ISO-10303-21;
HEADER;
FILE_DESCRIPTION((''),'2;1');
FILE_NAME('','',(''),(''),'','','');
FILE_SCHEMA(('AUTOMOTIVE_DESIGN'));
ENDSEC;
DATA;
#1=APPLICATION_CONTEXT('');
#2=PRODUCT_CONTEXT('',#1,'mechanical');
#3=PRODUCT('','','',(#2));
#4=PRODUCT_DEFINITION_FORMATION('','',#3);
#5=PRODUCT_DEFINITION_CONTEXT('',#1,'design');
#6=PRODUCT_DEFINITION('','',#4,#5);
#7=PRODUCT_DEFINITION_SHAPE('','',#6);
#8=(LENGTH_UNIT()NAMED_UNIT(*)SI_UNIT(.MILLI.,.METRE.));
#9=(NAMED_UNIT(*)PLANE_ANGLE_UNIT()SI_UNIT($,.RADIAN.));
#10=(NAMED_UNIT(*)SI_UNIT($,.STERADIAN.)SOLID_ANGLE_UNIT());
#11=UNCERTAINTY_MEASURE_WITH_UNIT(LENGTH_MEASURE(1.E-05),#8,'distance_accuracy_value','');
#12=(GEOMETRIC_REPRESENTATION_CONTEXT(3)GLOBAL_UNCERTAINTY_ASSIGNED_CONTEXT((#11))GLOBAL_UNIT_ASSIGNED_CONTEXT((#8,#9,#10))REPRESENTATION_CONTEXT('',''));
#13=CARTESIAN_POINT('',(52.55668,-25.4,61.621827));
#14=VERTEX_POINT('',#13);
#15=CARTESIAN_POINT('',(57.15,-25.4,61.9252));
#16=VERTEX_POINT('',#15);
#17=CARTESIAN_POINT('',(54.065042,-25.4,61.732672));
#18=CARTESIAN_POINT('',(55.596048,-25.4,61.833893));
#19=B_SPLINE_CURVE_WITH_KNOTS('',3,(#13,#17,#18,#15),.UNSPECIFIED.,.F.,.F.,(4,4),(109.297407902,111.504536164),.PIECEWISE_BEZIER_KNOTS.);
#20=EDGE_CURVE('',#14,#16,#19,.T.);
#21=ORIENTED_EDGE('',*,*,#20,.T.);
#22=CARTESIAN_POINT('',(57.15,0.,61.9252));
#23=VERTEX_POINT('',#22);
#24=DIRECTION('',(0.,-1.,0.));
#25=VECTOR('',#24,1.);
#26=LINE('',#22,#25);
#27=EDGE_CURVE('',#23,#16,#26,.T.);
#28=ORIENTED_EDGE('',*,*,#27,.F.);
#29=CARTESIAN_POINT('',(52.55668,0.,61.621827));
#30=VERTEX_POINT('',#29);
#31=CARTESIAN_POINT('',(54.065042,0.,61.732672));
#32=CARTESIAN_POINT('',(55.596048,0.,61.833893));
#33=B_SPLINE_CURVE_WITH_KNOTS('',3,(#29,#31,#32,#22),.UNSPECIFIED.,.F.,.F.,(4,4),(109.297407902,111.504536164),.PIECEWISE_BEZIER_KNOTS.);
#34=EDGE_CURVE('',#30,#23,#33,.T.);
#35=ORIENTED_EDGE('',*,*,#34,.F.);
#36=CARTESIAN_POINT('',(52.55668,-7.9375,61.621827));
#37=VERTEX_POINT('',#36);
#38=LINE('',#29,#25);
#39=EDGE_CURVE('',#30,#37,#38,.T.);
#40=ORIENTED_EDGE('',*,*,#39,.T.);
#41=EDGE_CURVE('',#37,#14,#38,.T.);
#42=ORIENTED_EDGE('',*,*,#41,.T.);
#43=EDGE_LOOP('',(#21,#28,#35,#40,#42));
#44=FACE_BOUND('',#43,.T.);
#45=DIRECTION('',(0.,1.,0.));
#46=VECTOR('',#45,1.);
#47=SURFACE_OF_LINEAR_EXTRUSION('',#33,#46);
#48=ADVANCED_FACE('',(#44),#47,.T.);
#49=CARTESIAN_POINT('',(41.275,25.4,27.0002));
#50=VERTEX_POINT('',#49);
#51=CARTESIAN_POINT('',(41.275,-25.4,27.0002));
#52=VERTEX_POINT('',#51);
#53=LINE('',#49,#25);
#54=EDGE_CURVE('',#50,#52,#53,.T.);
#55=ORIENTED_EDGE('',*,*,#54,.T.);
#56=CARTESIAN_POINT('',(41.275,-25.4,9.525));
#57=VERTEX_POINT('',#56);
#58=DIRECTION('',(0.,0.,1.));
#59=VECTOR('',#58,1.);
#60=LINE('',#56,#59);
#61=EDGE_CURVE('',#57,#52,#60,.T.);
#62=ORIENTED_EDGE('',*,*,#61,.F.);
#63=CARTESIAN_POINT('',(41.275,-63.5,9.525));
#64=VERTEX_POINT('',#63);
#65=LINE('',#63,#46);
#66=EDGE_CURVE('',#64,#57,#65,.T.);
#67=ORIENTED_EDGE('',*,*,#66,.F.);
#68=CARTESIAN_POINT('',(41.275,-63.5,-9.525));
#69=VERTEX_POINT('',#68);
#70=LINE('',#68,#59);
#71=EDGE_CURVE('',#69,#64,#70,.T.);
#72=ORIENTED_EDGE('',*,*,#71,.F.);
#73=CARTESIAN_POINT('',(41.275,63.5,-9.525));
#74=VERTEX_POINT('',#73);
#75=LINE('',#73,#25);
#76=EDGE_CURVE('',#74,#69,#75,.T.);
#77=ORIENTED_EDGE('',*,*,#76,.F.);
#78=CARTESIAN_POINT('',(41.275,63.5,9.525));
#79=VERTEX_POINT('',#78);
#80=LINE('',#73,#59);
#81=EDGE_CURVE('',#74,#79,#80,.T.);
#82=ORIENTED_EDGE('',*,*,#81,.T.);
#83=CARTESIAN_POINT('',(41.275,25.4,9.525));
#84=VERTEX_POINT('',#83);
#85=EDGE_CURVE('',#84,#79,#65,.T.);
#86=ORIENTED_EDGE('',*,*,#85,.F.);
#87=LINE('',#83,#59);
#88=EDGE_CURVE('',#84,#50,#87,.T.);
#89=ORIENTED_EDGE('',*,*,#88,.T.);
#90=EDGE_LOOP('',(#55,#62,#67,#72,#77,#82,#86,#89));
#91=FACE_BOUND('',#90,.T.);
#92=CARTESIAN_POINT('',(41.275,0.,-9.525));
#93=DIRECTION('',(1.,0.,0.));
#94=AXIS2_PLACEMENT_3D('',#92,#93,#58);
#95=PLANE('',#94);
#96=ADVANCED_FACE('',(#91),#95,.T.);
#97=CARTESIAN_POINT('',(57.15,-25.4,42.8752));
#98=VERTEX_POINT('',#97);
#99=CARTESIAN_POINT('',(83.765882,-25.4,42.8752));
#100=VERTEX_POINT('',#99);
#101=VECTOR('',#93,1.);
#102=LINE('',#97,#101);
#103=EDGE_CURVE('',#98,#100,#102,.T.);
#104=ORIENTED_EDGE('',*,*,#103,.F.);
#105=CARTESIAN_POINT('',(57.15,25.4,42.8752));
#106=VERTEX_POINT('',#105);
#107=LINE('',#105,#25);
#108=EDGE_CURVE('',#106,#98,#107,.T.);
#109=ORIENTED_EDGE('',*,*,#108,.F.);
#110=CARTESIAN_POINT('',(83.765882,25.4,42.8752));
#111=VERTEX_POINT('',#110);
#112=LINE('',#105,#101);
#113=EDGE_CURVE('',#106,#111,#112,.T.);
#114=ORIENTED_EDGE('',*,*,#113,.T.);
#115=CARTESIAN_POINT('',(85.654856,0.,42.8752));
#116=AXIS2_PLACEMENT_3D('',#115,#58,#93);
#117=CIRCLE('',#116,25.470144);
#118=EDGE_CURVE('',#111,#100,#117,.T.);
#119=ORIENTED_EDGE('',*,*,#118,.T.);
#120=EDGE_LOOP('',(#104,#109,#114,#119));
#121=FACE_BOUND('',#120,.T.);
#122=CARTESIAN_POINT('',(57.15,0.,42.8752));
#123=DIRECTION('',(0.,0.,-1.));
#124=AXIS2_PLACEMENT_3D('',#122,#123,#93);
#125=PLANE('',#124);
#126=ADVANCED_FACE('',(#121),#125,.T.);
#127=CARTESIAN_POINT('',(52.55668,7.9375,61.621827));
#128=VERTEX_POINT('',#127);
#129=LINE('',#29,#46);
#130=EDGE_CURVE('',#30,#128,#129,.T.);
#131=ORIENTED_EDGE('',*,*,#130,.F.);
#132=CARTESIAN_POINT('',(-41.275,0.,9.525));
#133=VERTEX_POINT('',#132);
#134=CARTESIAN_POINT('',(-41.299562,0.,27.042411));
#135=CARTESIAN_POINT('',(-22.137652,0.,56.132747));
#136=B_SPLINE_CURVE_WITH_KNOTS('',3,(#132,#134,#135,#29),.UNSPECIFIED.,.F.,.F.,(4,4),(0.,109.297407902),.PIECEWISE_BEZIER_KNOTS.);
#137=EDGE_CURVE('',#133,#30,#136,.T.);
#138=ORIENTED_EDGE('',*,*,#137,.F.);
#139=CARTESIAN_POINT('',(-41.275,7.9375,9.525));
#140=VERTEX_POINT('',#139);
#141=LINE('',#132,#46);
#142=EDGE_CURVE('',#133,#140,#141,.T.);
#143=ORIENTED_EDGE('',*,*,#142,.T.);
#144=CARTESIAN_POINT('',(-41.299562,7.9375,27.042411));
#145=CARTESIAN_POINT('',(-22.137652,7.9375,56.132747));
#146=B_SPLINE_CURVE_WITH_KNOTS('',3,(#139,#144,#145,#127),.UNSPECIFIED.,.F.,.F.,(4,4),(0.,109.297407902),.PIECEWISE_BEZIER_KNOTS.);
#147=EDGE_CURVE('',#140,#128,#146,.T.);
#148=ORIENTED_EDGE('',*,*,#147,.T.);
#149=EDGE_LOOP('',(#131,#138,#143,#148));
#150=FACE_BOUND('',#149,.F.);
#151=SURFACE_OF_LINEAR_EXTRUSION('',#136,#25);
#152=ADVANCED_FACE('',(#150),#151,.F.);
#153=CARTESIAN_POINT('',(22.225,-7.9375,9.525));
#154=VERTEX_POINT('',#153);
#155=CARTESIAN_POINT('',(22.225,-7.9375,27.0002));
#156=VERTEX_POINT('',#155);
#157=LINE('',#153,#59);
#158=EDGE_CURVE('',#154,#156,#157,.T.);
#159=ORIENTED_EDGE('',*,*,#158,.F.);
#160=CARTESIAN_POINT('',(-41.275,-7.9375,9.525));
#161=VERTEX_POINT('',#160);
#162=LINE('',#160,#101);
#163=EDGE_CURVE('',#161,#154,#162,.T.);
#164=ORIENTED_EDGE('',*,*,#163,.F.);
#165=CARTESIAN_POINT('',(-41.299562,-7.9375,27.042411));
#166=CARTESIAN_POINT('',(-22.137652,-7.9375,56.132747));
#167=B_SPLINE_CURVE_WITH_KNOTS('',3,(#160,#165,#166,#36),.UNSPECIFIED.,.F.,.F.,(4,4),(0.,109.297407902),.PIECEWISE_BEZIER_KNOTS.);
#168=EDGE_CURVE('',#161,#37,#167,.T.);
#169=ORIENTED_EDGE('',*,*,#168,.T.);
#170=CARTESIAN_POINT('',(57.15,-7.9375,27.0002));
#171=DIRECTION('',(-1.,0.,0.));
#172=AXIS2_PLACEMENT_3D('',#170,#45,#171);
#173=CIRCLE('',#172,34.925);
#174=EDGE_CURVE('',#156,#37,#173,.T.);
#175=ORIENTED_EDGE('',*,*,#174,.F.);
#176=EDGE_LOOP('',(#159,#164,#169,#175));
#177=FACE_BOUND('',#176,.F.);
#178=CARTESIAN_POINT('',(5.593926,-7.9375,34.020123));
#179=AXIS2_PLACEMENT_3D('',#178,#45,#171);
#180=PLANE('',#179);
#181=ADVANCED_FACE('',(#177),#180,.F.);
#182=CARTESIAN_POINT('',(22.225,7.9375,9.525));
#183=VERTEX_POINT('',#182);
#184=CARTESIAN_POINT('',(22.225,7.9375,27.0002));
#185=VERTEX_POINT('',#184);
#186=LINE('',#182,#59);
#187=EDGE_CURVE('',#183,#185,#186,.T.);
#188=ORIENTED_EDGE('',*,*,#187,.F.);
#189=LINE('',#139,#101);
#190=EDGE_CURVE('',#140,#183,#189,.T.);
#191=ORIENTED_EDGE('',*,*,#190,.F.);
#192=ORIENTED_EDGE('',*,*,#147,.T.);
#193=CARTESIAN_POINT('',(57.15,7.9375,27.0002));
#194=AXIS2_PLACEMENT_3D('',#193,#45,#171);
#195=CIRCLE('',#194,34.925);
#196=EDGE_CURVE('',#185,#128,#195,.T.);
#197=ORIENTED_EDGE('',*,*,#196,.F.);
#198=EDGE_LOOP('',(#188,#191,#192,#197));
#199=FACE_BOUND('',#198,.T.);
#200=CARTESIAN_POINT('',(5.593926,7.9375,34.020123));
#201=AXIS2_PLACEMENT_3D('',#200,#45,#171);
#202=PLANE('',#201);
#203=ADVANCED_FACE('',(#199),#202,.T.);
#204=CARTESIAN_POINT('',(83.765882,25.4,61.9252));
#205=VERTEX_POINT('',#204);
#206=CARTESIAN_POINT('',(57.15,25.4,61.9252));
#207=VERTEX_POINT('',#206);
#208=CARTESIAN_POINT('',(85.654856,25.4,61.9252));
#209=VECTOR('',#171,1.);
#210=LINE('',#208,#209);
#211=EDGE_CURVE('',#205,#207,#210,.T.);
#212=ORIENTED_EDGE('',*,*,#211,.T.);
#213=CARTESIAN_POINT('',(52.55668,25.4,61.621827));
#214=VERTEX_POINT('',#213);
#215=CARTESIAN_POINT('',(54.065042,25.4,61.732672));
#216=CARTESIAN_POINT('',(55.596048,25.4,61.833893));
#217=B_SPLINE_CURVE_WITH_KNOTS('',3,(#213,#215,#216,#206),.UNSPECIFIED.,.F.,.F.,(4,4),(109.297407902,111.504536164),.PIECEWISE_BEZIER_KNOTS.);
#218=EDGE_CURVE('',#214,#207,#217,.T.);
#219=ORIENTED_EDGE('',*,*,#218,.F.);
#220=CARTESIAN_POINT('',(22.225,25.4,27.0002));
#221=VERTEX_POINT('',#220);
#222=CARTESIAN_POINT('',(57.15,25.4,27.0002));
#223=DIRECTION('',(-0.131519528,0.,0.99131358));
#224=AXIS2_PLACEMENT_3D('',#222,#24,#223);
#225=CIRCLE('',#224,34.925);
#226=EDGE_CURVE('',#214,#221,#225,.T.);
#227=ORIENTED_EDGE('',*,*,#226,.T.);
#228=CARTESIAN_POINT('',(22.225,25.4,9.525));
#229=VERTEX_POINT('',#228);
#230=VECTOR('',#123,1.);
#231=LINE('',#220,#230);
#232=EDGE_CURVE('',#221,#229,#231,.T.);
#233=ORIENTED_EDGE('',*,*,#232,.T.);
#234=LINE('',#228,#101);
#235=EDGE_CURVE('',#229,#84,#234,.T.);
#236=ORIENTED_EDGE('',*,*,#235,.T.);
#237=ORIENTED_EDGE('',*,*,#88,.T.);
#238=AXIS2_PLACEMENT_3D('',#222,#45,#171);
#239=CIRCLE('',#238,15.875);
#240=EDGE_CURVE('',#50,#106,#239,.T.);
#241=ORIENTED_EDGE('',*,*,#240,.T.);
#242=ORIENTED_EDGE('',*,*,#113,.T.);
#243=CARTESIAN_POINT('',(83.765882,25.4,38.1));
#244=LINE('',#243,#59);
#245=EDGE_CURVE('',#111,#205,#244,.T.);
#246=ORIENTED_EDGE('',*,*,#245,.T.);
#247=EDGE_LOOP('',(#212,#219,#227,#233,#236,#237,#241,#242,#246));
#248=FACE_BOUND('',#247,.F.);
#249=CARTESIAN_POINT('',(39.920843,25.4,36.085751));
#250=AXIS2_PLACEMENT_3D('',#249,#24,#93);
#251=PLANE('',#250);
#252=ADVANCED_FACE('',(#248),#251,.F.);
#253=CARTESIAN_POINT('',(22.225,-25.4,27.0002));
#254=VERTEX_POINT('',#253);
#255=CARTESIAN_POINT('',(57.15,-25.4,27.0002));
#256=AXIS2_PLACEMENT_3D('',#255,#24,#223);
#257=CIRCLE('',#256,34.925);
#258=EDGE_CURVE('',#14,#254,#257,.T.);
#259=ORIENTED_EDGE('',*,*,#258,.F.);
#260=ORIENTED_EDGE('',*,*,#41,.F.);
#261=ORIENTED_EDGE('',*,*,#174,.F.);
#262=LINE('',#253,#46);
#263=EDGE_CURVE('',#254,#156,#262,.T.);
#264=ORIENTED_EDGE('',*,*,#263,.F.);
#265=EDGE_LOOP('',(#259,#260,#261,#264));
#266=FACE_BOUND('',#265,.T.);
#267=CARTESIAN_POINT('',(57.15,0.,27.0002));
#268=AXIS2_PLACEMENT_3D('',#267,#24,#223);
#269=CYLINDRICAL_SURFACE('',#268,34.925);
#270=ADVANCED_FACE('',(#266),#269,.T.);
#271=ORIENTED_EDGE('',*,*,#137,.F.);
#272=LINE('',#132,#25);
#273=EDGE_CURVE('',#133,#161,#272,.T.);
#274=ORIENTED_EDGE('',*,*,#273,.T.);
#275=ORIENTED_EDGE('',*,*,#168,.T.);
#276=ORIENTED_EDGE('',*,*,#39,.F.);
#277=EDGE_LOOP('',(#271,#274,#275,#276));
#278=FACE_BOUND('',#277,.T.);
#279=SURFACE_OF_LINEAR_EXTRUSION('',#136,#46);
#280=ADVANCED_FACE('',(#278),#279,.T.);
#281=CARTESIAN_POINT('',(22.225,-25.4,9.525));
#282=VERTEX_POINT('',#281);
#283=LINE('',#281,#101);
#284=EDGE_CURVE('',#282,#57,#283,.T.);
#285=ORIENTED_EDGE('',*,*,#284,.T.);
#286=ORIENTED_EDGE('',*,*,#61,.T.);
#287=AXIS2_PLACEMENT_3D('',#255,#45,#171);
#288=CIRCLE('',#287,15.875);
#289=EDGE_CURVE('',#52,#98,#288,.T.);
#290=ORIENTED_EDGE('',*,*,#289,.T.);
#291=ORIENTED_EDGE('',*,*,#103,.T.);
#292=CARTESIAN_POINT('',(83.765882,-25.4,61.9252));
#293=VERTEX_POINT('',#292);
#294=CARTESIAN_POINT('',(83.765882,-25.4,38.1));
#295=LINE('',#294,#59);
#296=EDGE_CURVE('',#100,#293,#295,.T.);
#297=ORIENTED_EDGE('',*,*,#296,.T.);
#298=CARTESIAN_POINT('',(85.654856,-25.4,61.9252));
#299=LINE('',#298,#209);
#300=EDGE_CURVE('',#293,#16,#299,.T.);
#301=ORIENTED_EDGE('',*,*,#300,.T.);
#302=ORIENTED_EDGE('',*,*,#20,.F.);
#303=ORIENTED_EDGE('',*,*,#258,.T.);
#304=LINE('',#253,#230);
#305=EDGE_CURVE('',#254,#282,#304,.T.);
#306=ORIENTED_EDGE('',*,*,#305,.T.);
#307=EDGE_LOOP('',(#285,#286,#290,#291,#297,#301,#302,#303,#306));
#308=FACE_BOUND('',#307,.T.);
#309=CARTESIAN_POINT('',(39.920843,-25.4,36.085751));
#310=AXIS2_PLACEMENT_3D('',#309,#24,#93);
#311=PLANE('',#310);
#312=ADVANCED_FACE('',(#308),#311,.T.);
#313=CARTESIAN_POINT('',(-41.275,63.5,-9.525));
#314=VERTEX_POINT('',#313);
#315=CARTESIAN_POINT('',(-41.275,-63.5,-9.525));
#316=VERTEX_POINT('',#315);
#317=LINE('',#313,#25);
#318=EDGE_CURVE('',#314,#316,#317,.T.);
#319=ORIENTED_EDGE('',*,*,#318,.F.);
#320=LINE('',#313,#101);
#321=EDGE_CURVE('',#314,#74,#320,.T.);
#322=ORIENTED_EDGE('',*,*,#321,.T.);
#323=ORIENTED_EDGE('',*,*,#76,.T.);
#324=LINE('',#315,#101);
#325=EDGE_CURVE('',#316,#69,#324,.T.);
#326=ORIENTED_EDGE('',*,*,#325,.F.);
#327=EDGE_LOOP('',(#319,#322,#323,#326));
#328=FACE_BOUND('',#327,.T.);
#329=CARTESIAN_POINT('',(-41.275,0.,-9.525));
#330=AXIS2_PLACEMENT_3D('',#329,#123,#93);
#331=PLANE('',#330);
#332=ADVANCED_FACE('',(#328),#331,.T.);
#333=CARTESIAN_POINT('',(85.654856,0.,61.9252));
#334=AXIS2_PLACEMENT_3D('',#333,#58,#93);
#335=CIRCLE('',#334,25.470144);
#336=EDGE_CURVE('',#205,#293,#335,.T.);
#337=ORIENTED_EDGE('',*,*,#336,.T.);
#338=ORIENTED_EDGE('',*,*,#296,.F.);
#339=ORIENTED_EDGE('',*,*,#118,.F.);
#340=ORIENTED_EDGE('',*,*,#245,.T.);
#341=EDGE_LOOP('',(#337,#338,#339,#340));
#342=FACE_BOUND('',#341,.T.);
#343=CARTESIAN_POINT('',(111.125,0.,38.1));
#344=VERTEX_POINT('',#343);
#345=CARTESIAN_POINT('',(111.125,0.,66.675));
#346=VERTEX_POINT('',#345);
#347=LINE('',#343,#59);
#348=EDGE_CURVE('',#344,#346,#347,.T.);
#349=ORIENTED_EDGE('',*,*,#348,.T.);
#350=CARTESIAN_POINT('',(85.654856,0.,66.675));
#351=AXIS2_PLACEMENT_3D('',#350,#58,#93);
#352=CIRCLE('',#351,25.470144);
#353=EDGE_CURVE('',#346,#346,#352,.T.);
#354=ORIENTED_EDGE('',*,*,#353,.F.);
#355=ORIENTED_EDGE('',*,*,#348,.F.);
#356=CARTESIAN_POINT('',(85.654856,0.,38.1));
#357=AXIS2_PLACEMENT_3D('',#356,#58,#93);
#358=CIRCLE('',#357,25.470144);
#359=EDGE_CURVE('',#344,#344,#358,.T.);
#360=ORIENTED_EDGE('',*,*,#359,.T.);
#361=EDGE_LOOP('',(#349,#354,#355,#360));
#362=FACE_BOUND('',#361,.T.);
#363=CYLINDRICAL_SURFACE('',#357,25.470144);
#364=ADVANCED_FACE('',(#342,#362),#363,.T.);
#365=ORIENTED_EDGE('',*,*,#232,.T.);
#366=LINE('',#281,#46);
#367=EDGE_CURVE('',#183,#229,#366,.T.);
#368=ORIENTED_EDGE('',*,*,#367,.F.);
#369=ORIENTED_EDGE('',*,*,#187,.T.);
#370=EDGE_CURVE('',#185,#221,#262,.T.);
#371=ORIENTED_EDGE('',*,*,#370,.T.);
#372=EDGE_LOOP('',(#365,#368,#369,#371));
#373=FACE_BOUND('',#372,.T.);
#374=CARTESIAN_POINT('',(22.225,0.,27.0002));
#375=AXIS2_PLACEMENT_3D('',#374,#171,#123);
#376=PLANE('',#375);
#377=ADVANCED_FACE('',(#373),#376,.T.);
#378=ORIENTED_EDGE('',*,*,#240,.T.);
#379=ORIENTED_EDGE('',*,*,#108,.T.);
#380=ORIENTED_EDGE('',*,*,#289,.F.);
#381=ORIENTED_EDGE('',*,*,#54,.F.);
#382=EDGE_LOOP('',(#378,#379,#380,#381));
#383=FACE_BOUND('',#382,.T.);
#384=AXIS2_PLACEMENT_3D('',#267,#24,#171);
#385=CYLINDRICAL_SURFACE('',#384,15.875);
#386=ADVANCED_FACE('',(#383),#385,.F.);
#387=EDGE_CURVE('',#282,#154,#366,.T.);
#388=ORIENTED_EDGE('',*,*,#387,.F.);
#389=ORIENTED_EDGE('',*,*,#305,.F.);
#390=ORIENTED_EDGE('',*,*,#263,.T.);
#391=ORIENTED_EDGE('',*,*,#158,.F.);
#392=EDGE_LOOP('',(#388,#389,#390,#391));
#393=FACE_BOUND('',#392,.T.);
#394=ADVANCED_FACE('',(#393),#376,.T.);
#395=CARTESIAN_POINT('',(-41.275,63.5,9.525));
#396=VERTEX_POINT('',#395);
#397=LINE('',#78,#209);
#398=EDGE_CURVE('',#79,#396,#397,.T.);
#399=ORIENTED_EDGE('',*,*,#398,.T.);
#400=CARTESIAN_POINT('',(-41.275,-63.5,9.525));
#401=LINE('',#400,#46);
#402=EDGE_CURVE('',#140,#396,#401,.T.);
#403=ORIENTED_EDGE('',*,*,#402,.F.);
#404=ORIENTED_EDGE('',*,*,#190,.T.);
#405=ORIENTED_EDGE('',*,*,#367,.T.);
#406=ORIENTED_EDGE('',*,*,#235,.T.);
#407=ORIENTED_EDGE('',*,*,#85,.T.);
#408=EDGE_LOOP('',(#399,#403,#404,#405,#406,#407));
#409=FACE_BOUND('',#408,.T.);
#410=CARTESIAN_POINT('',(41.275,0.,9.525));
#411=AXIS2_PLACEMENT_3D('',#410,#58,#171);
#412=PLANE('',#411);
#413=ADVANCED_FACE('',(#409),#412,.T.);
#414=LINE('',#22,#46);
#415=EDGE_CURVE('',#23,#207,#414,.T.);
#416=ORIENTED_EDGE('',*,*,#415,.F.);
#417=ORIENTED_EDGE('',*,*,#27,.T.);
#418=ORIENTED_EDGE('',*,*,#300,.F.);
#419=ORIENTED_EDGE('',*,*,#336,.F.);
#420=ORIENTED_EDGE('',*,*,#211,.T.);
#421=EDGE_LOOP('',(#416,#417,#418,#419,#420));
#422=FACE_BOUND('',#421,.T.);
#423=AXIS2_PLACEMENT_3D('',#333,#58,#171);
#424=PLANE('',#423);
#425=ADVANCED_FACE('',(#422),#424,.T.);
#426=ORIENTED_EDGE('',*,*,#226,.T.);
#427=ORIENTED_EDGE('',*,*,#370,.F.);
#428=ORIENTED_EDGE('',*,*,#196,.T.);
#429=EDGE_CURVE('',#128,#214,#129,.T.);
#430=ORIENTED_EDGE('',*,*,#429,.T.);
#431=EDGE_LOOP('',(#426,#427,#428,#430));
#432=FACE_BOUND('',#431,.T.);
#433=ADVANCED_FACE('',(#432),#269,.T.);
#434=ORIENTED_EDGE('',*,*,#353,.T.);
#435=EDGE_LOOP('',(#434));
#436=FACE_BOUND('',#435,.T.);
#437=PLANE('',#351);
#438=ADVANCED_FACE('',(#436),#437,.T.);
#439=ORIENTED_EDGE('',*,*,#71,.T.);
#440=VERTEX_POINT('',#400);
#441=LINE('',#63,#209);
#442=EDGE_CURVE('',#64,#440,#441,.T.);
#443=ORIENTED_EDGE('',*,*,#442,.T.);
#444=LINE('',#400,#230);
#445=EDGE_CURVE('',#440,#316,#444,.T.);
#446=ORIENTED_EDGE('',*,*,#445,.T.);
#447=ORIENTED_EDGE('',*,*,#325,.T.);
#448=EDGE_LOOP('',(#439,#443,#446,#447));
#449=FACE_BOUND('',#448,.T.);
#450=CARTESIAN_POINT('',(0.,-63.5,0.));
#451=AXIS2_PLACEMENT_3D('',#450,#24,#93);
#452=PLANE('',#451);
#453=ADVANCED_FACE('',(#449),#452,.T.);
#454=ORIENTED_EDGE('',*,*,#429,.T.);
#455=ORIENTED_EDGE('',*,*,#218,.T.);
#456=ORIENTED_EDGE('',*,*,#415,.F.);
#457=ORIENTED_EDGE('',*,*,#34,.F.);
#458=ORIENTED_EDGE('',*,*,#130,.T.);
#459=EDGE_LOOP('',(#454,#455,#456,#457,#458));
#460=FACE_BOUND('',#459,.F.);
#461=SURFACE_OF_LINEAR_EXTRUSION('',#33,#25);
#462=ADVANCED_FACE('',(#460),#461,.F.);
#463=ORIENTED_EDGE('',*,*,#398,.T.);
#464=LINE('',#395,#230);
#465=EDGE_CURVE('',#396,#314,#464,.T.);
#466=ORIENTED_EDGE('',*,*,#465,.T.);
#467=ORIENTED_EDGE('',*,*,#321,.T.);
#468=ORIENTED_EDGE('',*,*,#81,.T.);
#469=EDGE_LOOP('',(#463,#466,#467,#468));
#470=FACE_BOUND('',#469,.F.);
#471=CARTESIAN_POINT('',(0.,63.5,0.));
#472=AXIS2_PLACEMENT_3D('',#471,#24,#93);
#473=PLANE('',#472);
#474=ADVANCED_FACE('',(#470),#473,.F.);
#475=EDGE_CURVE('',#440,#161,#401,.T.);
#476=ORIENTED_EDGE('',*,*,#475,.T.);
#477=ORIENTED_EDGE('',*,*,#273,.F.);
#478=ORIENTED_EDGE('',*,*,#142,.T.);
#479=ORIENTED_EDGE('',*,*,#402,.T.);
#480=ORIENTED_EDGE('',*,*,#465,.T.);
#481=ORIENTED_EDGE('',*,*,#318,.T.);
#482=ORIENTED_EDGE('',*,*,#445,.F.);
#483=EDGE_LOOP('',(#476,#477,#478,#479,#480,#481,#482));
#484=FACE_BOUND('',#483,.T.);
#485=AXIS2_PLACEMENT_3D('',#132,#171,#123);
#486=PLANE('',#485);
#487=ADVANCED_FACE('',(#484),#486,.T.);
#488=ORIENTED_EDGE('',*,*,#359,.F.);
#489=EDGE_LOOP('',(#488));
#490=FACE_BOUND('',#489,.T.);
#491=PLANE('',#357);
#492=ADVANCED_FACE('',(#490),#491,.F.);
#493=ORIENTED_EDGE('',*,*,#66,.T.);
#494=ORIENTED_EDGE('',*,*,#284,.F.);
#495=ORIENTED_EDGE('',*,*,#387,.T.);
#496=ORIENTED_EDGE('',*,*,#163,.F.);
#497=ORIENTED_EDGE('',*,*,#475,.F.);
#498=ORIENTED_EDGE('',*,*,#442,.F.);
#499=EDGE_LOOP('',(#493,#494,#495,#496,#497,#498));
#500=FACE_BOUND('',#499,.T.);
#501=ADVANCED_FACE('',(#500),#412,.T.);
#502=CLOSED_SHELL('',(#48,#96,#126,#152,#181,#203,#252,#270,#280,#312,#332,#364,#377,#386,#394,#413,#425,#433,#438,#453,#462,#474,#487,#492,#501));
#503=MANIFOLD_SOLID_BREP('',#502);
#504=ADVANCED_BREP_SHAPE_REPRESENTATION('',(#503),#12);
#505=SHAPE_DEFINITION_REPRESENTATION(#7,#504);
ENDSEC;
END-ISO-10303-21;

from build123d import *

# Parameters (mm, degrees)
F1_DEPTH = 63.5
F0_W     = 25.3298562567
F0_H     = 19.05
F2_DEPTH = 25.4
F3_DEPTH = 7.9375


with BuildPart() as f1:
    # F0 (on Front) → F1 (new body, symmetric)
    with BuildSketch(Plane.XZ):
        Polygon((-41.275, 9.525), (-41.275, -9.525), (41.275, -9.525), (41.275, 9.525), (22.225, 9.525), align=None)
    extrude(amount=F1_DEPTH, both=True)

    # F0 (on Front) → F2 (join, symmetric)
    with BuildSketch(Plane.XZ):
        with BuildLine():
            Line((22.225, 9.525), (41.275, 9.525))
            Line((41.275, 9.525), (41.275, 27.0002))
            ThreePointArc((41.275, 27.0002), (45.9246798487, 38.2255201513), (57.15, 42.8752))
            Line((57.15, 42.8752), (60.325, 42.8752))
            Line((60.325, 42.8752), (60.325, 61.9252))
            Line((60.325, 61.9252), (57.15, 61.9252))
            add(Edge.make_bspline(
                [(52.5566804935, 61.6218267803), (54.0650417221, 61.7326720686), (55.596048457, 61.833893026), (57.15, 61.9252)],
                knots=[109.2974079023, 109.2974079023, 109.2974079023, 109.2974079023, 111.5045361635, 111.5045361635, 111.5045361635, 111.5045361635], degree=3))
            ThreePointArc((52.5566804935, 61.6218267803), (30.8804614738, 50.0146947939), (22.225, 27.0002))
            Line((22.225, 27.0002), (22.225, 9.525))
        make_face()
        with Locations((72.9899281284, 52.4002)):
            Rectangle(F0_W, F0_H)
    extrude(amount=F2_DEPTH, both=True)

    # F0 (on Front) → F3 (join, symmetric)
    with BuildSketch(Plane.XZ):
        with BuildLine():
            add(Edge.make_bspline(
                [(-41.275, 9.525), (-41.2995623579, 27.0424108455), (-22.1376521166, 56.1327471898), (52.5566804935, 61.6218267803)],
                knots=[0, 0, 0, 0, 109.2974079023, 109.2974079023, 109.2974079023, 109.2974079023], degree=3))
            Line((-41.275, 9.525), (22.225, 9.525))
            Line((22.225, 9.525), (22.225, 27.0002))
            ThreePointArc((22.225, 27.0002), (30.8804614738, 50.0146947939), (52.5566804935, 61.6218267803))
        make_face()
    extrude(amount=F3_DEPTH, both=True)

    # F0 (on Front) → F4 (revolve)
    with BuildSketch(Plane.XZ):
        Polygon((85.6548562567, 66.675), (85.6548562567, 61.9252), (85.6548562567, 42.8752), (85.6548562567, 38.1), (111.125, 38.1), (111.125, 66.675), align=None)
    revolve(axis=Axis((85.6548562567, 0, 52.3875), (0, 0, 1)))


solid = f1.part
